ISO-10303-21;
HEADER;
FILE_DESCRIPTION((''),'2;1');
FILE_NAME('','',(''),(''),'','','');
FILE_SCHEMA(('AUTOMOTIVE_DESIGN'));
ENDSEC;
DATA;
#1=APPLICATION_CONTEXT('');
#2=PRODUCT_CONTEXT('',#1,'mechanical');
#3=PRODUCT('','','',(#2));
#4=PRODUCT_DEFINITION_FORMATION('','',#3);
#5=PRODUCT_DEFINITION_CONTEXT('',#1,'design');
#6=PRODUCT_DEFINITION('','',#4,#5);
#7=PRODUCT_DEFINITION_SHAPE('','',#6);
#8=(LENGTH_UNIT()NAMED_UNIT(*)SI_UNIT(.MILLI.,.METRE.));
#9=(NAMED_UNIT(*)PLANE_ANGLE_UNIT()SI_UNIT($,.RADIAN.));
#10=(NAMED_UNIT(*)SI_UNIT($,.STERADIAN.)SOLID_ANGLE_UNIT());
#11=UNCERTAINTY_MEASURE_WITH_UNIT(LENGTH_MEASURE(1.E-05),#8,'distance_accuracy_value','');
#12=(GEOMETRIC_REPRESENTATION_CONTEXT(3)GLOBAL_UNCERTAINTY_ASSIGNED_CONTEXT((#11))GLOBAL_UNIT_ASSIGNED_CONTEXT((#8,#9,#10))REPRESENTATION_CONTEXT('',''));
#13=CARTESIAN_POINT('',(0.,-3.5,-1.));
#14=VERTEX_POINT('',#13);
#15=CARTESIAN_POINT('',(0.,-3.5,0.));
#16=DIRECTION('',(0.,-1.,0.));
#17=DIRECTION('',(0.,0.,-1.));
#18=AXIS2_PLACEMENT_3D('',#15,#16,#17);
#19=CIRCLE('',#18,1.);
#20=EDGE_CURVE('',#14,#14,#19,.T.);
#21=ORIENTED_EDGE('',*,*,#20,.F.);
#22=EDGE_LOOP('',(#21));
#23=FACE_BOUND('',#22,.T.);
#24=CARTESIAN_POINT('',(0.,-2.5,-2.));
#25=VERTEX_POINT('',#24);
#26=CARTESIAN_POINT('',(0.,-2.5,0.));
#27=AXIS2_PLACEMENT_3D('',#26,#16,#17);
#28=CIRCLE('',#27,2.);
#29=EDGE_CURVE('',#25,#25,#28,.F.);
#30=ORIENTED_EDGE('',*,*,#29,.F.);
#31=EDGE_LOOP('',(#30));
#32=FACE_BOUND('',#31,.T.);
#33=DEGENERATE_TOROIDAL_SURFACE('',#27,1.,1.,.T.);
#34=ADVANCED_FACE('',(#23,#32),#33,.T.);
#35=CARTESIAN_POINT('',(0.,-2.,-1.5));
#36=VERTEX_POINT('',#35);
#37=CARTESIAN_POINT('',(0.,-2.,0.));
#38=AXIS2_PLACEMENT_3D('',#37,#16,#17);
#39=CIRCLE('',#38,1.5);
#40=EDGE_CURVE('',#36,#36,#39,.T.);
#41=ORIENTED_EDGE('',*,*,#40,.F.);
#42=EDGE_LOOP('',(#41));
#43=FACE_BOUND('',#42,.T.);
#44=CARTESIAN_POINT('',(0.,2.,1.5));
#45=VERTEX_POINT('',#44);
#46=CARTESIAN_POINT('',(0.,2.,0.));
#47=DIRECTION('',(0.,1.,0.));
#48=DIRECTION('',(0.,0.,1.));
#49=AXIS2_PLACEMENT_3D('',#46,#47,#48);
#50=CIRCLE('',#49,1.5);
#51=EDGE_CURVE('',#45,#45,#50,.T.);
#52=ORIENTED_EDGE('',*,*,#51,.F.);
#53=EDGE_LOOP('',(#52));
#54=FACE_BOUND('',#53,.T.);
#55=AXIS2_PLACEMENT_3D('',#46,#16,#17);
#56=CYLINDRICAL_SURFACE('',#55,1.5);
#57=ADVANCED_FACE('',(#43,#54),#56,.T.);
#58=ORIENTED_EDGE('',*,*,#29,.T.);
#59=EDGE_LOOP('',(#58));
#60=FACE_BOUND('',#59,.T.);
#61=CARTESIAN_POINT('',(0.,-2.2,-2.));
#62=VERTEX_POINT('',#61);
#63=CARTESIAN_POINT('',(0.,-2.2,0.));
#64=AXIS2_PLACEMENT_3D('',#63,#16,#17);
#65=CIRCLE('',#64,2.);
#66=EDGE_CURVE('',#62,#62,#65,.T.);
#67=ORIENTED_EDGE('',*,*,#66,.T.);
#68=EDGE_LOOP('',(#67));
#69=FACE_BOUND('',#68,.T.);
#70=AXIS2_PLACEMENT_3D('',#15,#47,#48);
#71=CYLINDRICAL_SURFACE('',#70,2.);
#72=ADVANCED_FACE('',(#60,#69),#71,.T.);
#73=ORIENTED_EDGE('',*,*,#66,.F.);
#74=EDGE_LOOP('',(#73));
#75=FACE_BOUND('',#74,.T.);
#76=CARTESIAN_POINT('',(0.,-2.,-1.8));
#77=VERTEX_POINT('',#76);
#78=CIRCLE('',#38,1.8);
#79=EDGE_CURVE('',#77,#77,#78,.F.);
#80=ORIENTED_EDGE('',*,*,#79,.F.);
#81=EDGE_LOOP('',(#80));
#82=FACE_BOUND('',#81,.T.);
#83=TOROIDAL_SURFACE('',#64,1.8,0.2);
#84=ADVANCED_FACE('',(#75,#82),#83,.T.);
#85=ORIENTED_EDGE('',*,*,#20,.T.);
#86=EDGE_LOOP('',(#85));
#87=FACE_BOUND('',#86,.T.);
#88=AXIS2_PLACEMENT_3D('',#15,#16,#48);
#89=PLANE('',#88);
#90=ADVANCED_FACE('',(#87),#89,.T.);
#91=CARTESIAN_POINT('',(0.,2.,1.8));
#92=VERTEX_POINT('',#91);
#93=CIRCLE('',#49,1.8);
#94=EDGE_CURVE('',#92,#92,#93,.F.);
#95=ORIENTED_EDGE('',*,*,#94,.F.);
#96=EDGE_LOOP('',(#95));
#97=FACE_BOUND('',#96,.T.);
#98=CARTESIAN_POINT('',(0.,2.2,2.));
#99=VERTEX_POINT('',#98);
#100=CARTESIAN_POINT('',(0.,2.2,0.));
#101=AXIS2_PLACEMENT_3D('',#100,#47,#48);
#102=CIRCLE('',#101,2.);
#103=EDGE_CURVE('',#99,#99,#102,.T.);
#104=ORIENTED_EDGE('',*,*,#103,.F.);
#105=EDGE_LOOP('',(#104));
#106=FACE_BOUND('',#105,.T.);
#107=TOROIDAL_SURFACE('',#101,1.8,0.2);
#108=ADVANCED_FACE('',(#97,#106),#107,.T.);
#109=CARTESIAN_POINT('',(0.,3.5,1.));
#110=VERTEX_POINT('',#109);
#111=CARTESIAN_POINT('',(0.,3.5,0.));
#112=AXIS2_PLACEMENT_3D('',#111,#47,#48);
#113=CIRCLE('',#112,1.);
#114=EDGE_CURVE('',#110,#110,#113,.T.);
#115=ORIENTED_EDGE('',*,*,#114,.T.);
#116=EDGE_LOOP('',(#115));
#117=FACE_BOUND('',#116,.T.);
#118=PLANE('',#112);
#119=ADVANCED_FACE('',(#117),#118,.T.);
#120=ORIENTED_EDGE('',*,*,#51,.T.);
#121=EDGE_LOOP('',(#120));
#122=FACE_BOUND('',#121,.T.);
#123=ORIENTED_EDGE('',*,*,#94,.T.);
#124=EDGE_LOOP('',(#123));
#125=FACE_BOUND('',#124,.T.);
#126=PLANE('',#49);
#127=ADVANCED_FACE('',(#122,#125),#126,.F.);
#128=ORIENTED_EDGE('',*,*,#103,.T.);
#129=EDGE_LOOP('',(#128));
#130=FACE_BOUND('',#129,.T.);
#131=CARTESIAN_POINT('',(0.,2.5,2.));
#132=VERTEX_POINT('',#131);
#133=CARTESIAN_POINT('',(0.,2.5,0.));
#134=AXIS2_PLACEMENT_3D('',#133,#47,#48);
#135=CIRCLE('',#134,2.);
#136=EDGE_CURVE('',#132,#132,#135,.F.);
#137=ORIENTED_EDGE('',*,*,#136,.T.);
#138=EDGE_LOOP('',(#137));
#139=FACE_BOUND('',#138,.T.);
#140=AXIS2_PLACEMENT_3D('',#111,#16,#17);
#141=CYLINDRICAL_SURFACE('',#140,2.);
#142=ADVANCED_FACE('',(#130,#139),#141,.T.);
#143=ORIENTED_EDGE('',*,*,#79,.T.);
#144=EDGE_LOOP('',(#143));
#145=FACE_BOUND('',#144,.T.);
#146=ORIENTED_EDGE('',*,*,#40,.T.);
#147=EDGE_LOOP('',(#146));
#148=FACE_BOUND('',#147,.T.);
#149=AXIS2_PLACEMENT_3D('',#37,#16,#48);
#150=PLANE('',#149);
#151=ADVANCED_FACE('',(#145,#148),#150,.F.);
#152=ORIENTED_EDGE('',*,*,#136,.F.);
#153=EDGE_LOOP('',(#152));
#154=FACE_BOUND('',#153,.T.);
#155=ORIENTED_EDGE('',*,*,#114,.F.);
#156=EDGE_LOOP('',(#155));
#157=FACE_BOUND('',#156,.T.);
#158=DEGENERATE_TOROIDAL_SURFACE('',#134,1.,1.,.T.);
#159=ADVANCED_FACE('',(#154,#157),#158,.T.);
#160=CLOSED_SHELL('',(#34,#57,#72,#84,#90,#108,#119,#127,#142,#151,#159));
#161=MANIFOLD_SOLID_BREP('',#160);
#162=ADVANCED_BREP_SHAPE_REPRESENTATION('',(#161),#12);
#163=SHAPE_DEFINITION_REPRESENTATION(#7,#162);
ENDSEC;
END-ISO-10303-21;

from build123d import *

# Parameters (mm, degrees)
SKETCH1_R            = 1.5
BOSS_EXTRUDE1_DEPTH  = 2
SKETCH2_R            = 2
BOSS_EXTRUDE2_DEPTH  = 1.5
FILLET1_R            = 1
FILLET2_R            = 0.2
FILLET1_OF_MIRROR2_R = 1
FILLET2_OF_MIRROR2_R = 0.2


with BuildPart() as part:
    # Sketch1 → Boss-Extrude1 (new body)
    with BuildSketch(Plane(origin=(0, 0, 0), x_dir=(1, 0, 0), z_dir=(0, 1, 0))):
        Circle(SKETCH1_R)
    boss_extrude1 = extrude(amount=BOSS_EXTRUDE1_DEPTH)

    # Sketch2 → Boss-Extrude2 (add)
    with BuildSketch(Plane(origin=(0, 2, 0), x_dir=(1, 0, 0), z_dir=(0, 1, 0))):
        Circle(SKETCH2_R)
    boss_extrude2 = extrude(amount=BOSS_EXTRUDE2_DEPTH)

    # Fillet1
    fillet1_edges = [part.edges().sort_by_distance(p)[0] for p in [
        (-2, 3.5, 0),
    ]]
    fillet(fillet1_edges, radius=FILLET1_R)

    # Fillet2
    fillet2_edges = [part.edges().sort_by_distance(p)[0] for p in [
        (-2, 2, 0),
    ]]
    fillet(fillet2_edges, radius=FILLET2_R)

    # Mirror2: Boss-Extrude1, Boss-Extrude2 across plane
    add(boss_extrude1.mirror(Plane.ZX))
    add(boss_extrude2.mirror(Plane.ZX))

    # Fillet1 of Mirror2
    fillet1_of_mirror2_edges = [part.edges().sort_by_distance(p)[0] for p in [
        (-2, -3.5, 0),
    ]]
    fillet(fillet1_of_mirror2_edges, radius=FILLET1_OF_MIRROR2_R)

    # Fillet2 of Mirror2
    fillet2_of_mirror2_edges = [part.edges().sort_by_distance(p)[0] for p in [
        (-2, -2, 0),
    ]]
    fillet(fillet2_of_mirror2_edges, radius=FILLET2_OF_MIRROR2_R)


solid = part.part
